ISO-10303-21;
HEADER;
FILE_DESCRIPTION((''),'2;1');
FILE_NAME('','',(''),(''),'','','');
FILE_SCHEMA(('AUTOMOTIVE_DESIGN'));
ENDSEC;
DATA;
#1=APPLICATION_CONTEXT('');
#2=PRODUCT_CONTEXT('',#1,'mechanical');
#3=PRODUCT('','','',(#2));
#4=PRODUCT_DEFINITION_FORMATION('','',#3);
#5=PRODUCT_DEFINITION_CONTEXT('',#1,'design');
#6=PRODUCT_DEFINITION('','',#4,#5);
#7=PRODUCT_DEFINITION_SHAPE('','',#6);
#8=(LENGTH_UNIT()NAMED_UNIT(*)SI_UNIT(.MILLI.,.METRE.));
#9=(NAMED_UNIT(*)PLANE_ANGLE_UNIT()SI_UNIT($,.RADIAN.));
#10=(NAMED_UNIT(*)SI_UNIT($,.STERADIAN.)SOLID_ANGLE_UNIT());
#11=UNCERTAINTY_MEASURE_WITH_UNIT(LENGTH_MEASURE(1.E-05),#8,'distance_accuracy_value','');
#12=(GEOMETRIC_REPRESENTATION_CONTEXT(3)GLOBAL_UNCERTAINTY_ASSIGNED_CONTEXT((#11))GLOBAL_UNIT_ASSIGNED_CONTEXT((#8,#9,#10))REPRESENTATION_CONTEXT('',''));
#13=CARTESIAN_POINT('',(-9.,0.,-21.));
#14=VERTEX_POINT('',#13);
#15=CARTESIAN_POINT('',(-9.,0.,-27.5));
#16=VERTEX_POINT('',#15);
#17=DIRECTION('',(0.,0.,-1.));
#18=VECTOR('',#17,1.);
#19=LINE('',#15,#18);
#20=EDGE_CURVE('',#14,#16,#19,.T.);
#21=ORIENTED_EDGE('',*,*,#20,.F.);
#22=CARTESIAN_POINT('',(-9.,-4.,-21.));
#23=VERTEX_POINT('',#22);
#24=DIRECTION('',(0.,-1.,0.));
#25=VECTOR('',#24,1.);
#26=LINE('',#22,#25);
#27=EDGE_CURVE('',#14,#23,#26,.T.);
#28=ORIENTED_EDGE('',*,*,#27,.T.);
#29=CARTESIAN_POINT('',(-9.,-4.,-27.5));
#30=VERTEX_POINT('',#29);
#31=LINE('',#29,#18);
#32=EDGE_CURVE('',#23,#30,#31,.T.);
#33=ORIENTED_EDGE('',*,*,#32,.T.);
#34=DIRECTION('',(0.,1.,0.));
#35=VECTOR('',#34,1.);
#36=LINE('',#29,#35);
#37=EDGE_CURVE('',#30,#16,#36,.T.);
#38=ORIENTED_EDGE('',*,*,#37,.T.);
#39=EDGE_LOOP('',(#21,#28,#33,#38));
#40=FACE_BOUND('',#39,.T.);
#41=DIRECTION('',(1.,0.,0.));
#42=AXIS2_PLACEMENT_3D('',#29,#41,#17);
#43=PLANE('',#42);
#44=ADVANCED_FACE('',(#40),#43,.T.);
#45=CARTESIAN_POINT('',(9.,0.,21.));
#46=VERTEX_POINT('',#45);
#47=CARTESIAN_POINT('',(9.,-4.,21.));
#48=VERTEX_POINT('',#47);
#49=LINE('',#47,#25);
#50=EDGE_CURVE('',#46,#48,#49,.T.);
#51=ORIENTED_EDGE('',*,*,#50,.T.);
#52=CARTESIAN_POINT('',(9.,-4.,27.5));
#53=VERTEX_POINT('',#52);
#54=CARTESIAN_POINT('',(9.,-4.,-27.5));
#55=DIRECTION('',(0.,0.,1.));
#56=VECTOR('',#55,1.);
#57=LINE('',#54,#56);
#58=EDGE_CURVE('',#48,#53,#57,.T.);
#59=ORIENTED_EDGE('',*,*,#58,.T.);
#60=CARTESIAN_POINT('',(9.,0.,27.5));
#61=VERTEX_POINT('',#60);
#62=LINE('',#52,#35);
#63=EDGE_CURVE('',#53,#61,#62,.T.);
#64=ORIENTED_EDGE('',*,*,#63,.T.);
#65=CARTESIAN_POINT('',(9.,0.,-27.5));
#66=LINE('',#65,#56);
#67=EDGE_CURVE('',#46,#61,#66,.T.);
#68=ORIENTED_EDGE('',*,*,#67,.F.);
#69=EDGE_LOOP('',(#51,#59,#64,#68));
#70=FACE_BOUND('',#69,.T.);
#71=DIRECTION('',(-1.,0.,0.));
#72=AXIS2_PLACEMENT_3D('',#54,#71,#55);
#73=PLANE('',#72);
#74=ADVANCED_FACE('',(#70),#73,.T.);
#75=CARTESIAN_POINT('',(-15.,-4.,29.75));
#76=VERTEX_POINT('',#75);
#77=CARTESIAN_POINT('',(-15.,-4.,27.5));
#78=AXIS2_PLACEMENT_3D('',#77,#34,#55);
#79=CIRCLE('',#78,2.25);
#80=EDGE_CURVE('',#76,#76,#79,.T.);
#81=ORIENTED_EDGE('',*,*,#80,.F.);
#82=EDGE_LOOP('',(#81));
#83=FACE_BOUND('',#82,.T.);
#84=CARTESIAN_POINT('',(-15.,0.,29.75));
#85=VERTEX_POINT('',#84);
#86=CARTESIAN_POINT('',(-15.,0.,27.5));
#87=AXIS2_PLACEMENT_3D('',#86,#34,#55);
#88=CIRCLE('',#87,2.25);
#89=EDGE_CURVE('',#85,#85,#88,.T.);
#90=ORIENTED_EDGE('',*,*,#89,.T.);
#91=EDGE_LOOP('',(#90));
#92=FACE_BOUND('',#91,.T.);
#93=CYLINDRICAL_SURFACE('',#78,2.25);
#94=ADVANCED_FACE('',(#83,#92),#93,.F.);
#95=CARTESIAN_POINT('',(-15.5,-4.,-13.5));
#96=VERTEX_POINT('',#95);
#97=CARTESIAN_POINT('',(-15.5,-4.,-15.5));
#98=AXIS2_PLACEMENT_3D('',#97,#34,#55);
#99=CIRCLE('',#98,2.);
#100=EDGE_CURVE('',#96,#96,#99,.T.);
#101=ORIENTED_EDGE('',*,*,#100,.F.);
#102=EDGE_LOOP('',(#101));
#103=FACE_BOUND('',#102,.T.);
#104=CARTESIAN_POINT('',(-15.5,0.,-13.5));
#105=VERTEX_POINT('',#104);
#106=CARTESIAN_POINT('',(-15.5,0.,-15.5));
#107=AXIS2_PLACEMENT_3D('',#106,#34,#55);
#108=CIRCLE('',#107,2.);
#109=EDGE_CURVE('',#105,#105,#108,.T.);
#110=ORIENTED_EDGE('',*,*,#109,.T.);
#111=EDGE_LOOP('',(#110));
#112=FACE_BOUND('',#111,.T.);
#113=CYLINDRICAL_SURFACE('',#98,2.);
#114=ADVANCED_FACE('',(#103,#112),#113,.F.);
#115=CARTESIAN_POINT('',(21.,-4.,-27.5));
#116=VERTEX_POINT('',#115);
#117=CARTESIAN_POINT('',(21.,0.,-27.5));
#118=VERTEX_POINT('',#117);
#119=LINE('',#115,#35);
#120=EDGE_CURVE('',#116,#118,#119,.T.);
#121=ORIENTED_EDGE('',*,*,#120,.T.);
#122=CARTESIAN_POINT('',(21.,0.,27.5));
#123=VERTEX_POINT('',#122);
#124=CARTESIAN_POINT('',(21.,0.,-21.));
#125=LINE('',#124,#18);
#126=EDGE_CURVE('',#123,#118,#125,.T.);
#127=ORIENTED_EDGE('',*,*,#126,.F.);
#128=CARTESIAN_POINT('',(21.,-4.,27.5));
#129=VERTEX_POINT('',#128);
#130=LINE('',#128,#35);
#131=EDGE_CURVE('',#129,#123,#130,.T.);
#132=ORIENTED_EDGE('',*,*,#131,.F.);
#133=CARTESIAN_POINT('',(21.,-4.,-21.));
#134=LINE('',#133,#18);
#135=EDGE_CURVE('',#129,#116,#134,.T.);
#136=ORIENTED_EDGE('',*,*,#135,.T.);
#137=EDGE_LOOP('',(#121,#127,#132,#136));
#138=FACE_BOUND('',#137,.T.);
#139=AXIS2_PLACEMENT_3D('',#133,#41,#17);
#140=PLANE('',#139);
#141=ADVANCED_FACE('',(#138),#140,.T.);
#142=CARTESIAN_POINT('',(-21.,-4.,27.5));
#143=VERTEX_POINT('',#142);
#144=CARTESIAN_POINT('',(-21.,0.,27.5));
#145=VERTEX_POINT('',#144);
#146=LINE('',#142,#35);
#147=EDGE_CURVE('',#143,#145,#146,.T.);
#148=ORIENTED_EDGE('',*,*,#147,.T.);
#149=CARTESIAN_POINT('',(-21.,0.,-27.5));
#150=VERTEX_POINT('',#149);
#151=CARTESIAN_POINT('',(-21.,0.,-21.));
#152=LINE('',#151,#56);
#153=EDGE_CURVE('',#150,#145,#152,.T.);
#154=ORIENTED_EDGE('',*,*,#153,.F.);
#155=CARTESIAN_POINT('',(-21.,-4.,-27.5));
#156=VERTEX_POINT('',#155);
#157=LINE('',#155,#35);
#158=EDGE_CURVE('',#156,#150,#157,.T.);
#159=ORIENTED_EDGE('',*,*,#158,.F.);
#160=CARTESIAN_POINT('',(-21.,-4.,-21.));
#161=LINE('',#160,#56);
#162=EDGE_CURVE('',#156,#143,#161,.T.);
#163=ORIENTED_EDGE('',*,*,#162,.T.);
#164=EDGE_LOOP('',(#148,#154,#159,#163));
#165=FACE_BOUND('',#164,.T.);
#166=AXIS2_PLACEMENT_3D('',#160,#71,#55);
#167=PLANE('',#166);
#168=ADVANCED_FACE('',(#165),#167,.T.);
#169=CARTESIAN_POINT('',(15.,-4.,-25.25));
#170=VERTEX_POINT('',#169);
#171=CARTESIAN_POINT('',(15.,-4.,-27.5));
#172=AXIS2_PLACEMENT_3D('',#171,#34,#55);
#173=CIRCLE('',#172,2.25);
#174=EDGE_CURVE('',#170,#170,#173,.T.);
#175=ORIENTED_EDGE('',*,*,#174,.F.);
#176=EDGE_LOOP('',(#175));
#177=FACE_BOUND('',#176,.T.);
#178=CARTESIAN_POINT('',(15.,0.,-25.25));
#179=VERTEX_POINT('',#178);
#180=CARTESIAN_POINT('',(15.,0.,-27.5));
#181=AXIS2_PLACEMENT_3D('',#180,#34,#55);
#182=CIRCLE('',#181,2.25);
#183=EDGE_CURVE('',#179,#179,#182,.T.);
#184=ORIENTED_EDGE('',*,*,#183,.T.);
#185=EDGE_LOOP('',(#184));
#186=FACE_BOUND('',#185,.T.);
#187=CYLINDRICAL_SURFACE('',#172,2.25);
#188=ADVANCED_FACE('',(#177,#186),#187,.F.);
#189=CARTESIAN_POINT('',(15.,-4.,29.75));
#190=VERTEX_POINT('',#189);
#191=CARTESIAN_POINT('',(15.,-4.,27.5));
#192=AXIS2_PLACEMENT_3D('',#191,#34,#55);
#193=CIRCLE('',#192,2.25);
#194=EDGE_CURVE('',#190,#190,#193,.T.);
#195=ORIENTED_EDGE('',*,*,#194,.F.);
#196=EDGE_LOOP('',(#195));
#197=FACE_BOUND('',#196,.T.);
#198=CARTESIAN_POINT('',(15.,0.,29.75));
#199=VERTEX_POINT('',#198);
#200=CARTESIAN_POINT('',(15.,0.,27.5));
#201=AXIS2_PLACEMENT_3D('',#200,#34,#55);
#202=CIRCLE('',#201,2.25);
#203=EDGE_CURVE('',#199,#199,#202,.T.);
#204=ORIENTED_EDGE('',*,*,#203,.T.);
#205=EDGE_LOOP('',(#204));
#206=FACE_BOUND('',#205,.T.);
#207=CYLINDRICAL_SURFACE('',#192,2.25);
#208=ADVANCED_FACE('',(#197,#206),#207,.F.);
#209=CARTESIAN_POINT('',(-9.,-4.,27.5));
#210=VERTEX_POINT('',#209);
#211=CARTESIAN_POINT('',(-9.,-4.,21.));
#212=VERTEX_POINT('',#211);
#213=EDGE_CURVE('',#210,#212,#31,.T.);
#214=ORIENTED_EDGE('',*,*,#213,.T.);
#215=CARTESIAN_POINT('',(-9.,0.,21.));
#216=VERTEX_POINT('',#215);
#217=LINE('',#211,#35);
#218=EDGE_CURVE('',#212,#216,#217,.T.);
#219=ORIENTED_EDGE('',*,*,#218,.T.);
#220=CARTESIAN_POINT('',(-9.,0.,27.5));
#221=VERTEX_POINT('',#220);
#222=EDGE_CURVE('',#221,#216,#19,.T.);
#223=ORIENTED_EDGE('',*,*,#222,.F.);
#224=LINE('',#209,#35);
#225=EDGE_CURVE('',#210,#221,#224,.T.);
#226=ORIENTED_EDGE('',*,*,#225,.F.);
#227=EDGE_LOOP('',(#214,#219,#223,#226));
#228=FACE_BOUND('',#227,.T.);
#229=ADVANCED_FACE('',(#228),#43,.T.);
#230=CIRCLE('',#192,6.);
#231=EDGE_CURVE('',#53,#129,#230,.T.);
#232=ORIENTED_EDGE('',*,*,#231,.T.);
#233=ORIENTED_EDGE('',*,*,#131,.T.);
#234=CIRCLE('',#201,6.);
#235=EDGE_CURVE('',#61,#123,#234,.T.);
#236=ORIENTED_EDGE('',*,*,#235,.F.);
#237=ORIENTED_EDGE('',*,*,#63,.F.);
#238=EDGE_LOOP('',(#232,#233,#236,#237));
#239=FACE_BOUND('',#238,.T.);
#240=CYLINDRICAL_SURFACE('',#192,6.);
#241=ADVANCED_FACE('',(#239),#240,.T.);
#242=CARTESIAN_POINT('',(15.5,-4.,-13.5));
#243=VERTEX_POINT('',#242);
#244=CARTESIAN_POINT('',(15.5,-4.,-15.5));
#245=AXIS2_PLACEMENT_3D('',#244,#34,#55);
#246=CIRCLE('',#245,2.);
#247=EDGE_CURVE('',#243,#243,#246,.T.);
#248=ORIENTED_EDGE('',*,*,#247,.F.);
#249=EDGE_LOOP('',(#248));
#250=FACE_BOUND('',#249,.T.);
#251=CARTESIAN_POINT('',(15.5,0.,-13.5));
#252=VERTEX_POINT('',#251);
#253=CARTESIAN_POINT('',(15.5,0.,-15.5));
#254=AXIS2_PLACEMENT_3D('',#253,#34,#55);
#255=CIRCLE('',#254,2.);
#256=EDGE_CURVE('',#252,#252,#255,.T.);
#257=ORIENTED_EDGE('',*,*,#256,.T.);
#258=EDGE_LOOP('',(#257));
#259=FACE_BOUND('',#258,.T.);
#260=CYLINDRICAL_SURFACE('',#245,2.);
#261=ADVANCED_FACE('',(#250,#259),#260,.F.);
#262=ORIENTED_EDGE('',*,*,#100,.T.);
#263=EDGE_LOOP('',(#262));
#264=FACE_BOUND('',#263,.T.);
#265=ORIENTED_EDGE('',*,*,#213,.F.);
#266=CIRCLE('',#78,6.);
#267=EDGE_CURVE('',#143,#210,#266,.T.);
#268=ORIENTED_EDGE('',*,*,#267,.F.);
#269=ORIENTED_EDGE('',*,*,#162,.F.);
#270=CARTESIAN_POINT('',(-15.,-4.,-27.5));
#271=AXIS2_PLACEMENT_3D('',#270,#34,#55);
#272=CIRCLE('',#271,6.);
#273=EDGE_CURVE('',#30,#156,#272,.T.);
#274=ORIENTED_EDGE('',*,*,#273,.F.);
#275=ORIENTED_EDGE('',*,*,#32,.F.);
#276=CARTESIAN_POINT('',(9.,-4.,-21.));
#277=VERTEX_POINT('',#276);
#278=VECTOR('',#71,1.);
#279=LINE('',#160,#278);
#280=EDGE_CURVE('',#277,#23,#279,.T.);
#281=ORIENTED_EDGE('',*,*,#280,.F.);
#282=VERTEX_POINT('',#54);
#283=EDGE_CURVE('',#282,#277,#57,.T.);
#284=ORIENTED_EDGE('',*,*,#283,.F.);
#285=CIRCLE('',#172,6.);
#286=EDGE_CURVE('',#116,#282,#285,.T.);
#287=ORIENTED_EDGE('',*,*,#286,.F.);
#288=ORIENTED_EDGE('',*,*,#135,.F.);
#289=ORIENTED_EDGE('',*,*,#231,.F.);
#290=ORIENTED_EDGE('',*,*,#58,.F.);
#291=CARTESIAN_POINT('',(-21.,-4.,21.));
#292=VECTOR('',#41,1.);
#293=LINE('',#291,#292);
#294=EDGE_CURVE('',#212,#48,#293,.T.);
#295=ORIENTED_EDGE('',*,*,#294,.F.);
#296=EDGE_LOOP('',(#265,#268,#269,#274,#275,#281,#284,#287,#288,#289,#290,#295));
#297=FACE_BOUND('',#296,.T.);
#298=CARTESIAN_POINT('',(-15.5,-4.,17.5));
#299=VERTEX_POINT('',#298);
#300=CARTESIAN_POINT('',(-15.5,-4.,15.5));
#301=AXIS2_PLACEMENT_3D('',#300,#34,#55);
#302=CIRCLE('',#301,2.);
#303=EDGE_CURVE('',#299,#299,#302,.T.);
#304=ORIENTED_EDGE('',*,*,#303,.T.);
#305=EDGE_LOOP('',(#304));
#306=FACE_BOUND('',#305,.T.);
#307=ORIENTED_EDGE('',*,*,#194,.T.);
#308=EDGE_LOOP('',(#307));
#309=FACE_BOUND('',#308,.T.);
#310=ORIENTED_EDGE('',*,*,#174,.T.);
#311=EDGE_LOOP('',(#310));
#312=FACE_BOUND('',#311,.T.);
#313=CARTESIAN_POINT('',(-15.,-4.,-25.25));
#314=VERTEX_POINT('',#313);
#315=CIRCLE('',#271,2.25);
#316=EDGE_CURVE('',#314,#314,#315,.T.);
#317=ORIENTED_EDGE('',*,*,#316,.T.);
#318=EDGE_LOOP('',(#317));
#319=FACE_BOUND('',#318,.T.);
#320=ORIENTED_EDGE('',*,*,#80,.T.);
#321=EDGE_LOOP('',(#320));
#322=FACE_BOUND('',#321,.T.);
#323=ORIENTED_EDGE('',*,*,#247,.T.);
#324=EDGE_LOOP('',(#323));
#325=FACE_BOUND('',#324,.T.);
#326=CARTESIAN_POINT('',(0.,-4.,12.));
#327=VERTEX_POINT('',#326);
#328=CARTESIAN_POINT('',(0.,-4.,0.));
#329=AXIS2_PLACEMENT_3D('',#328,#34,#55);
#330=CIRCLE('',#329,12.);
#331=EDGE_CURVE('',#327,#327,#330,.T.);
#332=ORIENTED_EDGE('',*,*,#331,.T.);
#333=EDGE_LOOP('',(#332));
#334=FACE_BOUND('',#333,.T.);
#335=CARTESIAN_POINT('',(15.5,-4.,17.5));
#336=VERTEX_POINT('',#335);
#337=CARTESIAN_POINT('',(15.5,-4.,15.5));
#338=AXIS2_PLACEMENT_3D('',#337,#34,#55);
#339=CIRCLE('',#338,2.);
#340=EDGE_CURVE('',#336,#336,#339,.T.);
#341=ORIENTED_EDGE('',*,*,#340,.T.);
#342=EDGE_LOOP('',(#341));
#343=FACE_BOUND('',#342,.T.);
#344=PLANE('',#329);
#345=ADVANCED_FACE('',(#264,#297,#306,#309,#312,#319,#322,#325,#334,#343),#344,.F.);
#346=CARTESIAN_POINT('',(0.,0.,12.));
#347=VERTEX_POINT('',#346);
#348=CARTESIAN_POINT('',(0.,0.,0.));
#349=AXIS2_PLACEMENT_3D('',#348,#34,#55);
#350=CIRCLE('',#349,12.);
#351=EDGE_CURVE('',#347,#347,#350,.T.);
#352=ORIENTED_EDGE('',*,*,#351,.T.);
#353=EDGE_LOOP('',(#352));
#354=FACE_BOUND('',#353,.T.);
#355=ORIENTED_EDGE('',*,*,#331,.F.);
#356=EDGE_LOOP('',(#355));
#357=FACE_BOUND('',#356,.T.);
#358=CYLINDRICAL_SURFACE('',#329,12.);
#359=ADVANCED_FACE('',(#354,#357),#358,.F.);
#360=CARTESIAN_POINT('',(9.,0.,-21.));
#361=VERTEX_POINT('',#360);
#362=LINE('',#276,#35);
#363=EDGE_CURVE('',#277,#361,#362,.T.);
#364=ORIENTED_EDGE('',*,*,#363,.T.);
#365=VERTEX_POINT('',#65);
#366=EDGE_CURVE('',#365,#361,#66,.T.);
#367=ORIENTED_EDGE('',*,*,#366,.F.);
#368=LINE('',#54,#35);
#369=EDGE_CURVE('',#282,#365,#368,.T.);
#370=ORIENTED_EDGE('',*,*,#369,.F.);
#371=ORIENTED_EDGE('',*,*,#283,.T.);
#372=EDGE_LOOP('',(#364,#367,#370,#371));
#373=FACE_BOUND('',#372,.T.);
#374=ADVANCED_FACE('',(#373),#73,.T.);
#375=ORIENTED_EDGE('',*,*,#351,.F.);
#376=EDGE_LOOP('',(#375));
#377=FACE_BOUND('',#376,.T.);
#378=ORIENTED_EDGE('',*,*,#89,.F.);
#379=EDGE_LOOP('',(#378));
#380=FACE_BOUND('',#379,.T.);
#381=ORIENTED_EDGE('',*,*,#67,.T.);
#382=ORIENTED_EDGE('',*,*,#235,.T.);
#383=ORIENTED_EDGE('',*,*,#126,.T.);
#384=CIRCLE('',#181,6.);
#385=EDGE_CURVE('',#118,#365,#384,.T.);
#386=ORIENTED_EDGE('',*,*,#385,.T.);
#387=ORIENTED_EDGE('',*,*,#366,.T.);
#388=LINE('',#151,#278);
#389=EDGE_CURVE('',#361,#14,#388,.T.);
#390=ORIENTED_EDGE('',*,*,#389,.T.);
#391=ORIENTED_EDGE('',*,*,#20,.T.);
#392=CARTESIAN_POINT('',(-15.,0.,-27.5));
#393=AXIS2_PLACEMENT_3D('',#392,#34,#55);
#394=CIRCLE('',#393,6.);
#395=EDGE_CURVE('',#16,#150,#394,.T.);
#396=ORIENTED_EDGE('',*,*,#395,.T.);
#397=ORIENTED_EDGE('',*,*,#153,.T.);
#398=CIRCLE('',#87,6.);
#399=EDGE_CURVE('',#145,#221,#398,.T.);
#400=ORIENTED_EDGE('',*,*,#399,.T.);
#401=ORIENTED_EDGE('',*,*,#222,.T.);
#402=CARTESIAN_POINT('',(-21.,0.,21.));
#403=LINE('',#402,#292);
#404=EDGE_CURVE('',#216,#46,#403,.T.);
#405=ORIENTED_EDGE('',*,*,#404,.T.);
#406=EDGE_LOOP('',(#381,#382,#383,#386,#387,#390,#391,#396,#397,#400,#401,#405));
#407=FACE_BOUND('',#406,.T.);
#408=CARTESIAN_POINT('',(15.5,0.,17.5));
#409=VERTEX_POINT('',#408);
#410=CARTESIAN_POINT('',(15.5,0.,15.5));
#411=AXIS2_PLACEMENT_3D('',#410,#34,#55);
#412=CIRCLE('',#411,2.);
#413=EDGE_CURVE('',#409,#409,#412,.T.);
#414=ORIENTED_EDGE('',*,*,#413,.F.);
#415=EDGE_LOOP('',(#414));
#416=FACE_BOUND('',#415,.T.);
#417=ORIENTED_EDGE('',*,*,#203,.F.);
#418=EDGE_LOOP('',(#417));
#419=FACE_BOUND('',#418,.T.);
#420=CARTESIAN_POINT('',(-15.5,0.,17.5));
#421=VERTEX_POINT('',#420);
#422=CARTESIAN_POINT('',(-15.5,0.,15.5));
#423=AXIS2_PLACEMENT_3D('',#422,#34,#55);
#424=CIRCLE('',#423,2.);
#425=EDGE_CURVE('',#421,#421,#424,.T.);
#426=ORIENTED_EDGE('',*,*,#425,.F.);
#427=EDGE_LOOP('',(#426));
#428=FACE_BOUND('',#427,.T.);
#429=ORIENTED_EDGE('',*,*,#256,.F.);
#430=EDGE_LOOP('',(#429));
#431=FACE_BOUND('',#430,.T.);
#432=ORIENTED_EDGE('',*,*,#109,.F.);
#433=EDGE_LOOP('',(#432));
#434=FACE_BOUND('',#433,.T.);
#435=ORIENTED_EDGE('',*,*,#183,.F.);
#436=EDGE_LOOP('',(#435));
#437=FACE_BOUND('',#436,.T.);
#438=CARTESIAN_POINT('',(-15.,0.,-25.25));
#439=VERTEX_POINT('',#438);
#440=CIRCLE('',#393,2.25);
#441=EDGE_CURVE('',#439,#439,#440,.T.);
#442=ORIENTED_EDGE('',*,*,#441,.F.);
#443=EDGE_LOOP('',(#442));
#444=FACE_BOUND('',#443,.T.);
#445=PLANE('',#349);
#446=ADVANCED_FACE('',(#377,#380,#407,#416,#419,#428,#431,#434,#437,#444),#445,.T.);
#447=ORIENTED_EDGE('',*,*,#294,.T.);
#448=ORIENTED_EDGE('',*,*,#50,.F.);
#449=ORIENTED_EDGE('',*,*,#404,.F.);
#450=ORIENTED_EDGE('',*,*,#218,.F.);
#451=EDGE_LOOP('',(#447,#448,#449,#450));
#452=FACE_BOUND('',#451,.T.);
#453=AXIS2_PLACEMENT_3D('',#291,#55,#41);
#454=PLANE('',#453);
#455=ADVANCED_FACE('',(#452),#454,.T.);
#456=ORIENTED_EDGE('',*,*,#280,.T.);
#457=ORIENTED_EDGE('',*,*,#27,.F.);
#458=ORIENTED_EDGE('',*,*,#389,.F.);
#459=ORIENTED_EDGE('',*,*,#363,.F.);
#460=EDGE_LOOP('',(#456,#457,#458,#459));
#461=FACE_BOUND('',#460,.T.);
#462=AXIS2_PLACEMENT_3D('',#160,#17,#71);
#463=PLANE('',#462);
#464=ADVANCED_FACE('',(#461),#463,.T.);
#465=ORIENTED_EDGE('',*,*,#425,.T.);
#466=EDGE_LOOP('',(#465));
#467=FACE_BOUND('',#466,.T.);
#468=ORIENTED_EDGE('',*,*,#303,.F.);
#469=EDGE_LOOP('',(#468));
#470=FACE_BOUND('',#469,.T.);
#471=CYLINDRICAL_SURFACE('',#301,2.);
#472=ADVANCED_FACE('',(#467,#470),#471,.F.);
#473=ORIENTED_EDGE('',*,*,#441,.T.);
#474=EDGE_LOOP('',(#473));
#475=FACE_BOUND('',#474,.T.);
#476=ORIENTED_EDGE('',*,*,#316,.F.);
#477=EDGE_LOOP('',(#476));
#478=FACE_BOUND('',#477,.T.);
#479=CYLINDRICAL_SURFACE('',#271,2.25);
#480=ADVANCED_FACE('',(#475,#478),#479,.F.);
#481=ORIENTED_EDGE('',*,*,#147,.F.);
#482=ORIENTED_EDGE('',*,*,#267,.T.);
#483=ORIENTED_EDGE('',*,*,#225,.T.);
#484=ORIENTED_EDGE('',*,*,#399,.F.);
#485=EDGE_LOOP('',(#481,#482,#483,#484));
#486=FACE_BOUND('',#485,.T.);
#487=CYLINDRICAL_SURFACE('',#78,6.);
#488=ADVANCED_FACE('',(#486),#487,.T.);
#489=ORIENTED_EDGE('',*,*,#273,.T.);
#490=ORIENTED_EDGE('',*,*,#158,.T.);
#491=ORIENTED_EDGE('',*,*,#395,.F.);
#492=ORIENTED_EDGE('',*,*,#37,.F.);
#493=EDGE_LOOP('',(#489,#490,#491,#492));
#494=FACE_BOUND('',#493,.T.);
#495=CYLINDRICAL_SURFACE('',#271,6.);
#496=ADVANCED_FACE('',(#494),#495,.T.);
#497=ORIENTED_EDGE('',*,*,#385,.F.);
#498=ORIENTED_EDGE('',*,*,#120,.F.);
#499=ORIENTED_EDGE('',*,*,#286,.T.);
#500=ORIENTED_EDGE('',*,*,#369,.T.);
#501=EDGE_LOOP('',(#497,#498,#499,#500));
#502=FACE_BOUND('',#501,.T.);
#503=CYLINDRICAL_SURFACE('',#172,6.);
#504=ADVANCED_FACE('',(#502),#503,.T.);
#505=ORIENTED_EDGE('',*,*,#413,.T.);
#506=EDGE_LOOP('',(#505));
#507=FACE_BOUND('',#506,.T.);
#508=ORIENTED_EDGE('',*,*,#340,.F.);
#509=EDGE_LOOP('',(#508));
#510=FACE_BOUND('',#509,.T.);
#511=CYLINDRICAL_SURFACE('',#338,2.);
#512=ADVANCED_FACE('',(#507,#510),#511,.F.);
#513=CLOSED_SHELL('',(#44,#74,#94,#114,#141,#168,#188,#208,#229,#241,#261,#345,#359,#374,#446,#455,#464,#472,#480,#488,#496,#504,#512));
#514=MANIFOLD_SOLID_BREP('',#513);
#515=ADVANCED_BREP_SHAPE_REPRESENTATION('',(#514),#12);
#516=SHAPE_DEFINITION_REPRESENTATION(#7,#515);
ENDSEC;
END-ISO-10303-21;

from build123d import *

# Parameters (mm, degrees)
SKETCH1_W          = 42
SKETCH1_H          = 42
BASE_FLANGE1_DEPTH = 4
SKETCH4_R          = 2.25
TAB1_DEPTH         = 4
SKETCH5_R          = 12
SKETCH5_R_2        = 2
CUT_EXTRUDE1_DEPTH = 40.73977856


# Sheet-metal steps are written as plain solids
with BuildPart() as part:
    # Sketch1 → Base-Flange1 (new body)
    with BuildSketch(Plane(origin=(0, 0, 0), x_dir=(1, 0, 0), z_dir=(0, 1, 0))):
        Rectangle(SKETCH1_W, SKETCH1_H)
    extrude(amount=-BASE_FLANGE1_DEPTH)

    # Sketch4 → Tab1 (add)
    # profile 1 of 2: a face of its own
    with BuildSketch(Plane(origin=(0, 0, 0), x_dir=(1, 0, 0), z_dir=(0, 1, 0))):
        with BuildLine():
            Line((-9, 27.5), (-9, -27.5))
            ThreePointArc((-9, -27.5), (-15, -33.5), (-21, -27.5))
            Line((-21, -27.5), (-21, 27.5))
            ThreePointArc((-21, 27.5), (-15, 33.5), (-9, 27.5))
        make_face()
        with Locations(Location((-15, 27.5, 0), (0, 0, 270))):
            Circle(SKETCH4_R, mode=Mode.SUBTRACT)
        with Locations(Location((-15, -27.5, 0), (0, 0, 270))):
            Circle(SKETCH4_R, mode=Mode.SUBTRACT)
    # profile 2 of 2: a face of its own
    with BuildSketch(Plane(origin=(0, 0, 0), x_dir=(1, 0, 0), z_dir=(0, 1, 0))):
        with BuildLine():
            Line((21, 27.5), (21, -27.5))
            ThreePointArc((21, -27.5), (15, -33.5), (9, -27.5))
            Line((9, -27.5), (9, 27.5))
            ThreePointArc((9, 27.5), (15, 33.5), (21, 27.5))
        make_face()
        with Locations(Location((15, 27.5, 0), (0, 0, 270))):
            Circle(SKETCH4_R, mode=Mode.SUBTRACT)
        with Locations(Location((15, -27.5, 0), (0, 0, 270))):
            Circle(SKETCH4_R, mode=Mode.SUBTRACT)
    extrude(amount=-TAB1_DEPTH)

    # Sketch5 → Cut-Extrude1 (cut, through all)
    with BuildSketch(Plane(origin=(0, 0, 0), x_dir=(1, 0, 0), z_dir=(0, 1, 0))):
        with Locations(Location((0, 0, 0), (0, 0, 270))):
            Circle(SKETCH5_R)
        with Locations(Location((15.5, 15.5, 0), (0, 0, 270))):
            Circle(SKETCH5_R_2)
        with Locations(Location((15.5, -15.5, 0), (0, 0, 270))):
            Circle(SKETCH5_R_2)
        with Locations(Location((-15.5, -15.5, 0), (0, 0, 270))):
            Circle(SKETCH5_R_2)
        with Locations(Location((-15.5, 15.5, 0), (0, 0, 270))):
            Circle(SKETCH5_R_2)
    extrude(amount=-CUT_EXTRUDE1_DEPTH, mode=Mode.SUBTRACT)


solid = part.part
